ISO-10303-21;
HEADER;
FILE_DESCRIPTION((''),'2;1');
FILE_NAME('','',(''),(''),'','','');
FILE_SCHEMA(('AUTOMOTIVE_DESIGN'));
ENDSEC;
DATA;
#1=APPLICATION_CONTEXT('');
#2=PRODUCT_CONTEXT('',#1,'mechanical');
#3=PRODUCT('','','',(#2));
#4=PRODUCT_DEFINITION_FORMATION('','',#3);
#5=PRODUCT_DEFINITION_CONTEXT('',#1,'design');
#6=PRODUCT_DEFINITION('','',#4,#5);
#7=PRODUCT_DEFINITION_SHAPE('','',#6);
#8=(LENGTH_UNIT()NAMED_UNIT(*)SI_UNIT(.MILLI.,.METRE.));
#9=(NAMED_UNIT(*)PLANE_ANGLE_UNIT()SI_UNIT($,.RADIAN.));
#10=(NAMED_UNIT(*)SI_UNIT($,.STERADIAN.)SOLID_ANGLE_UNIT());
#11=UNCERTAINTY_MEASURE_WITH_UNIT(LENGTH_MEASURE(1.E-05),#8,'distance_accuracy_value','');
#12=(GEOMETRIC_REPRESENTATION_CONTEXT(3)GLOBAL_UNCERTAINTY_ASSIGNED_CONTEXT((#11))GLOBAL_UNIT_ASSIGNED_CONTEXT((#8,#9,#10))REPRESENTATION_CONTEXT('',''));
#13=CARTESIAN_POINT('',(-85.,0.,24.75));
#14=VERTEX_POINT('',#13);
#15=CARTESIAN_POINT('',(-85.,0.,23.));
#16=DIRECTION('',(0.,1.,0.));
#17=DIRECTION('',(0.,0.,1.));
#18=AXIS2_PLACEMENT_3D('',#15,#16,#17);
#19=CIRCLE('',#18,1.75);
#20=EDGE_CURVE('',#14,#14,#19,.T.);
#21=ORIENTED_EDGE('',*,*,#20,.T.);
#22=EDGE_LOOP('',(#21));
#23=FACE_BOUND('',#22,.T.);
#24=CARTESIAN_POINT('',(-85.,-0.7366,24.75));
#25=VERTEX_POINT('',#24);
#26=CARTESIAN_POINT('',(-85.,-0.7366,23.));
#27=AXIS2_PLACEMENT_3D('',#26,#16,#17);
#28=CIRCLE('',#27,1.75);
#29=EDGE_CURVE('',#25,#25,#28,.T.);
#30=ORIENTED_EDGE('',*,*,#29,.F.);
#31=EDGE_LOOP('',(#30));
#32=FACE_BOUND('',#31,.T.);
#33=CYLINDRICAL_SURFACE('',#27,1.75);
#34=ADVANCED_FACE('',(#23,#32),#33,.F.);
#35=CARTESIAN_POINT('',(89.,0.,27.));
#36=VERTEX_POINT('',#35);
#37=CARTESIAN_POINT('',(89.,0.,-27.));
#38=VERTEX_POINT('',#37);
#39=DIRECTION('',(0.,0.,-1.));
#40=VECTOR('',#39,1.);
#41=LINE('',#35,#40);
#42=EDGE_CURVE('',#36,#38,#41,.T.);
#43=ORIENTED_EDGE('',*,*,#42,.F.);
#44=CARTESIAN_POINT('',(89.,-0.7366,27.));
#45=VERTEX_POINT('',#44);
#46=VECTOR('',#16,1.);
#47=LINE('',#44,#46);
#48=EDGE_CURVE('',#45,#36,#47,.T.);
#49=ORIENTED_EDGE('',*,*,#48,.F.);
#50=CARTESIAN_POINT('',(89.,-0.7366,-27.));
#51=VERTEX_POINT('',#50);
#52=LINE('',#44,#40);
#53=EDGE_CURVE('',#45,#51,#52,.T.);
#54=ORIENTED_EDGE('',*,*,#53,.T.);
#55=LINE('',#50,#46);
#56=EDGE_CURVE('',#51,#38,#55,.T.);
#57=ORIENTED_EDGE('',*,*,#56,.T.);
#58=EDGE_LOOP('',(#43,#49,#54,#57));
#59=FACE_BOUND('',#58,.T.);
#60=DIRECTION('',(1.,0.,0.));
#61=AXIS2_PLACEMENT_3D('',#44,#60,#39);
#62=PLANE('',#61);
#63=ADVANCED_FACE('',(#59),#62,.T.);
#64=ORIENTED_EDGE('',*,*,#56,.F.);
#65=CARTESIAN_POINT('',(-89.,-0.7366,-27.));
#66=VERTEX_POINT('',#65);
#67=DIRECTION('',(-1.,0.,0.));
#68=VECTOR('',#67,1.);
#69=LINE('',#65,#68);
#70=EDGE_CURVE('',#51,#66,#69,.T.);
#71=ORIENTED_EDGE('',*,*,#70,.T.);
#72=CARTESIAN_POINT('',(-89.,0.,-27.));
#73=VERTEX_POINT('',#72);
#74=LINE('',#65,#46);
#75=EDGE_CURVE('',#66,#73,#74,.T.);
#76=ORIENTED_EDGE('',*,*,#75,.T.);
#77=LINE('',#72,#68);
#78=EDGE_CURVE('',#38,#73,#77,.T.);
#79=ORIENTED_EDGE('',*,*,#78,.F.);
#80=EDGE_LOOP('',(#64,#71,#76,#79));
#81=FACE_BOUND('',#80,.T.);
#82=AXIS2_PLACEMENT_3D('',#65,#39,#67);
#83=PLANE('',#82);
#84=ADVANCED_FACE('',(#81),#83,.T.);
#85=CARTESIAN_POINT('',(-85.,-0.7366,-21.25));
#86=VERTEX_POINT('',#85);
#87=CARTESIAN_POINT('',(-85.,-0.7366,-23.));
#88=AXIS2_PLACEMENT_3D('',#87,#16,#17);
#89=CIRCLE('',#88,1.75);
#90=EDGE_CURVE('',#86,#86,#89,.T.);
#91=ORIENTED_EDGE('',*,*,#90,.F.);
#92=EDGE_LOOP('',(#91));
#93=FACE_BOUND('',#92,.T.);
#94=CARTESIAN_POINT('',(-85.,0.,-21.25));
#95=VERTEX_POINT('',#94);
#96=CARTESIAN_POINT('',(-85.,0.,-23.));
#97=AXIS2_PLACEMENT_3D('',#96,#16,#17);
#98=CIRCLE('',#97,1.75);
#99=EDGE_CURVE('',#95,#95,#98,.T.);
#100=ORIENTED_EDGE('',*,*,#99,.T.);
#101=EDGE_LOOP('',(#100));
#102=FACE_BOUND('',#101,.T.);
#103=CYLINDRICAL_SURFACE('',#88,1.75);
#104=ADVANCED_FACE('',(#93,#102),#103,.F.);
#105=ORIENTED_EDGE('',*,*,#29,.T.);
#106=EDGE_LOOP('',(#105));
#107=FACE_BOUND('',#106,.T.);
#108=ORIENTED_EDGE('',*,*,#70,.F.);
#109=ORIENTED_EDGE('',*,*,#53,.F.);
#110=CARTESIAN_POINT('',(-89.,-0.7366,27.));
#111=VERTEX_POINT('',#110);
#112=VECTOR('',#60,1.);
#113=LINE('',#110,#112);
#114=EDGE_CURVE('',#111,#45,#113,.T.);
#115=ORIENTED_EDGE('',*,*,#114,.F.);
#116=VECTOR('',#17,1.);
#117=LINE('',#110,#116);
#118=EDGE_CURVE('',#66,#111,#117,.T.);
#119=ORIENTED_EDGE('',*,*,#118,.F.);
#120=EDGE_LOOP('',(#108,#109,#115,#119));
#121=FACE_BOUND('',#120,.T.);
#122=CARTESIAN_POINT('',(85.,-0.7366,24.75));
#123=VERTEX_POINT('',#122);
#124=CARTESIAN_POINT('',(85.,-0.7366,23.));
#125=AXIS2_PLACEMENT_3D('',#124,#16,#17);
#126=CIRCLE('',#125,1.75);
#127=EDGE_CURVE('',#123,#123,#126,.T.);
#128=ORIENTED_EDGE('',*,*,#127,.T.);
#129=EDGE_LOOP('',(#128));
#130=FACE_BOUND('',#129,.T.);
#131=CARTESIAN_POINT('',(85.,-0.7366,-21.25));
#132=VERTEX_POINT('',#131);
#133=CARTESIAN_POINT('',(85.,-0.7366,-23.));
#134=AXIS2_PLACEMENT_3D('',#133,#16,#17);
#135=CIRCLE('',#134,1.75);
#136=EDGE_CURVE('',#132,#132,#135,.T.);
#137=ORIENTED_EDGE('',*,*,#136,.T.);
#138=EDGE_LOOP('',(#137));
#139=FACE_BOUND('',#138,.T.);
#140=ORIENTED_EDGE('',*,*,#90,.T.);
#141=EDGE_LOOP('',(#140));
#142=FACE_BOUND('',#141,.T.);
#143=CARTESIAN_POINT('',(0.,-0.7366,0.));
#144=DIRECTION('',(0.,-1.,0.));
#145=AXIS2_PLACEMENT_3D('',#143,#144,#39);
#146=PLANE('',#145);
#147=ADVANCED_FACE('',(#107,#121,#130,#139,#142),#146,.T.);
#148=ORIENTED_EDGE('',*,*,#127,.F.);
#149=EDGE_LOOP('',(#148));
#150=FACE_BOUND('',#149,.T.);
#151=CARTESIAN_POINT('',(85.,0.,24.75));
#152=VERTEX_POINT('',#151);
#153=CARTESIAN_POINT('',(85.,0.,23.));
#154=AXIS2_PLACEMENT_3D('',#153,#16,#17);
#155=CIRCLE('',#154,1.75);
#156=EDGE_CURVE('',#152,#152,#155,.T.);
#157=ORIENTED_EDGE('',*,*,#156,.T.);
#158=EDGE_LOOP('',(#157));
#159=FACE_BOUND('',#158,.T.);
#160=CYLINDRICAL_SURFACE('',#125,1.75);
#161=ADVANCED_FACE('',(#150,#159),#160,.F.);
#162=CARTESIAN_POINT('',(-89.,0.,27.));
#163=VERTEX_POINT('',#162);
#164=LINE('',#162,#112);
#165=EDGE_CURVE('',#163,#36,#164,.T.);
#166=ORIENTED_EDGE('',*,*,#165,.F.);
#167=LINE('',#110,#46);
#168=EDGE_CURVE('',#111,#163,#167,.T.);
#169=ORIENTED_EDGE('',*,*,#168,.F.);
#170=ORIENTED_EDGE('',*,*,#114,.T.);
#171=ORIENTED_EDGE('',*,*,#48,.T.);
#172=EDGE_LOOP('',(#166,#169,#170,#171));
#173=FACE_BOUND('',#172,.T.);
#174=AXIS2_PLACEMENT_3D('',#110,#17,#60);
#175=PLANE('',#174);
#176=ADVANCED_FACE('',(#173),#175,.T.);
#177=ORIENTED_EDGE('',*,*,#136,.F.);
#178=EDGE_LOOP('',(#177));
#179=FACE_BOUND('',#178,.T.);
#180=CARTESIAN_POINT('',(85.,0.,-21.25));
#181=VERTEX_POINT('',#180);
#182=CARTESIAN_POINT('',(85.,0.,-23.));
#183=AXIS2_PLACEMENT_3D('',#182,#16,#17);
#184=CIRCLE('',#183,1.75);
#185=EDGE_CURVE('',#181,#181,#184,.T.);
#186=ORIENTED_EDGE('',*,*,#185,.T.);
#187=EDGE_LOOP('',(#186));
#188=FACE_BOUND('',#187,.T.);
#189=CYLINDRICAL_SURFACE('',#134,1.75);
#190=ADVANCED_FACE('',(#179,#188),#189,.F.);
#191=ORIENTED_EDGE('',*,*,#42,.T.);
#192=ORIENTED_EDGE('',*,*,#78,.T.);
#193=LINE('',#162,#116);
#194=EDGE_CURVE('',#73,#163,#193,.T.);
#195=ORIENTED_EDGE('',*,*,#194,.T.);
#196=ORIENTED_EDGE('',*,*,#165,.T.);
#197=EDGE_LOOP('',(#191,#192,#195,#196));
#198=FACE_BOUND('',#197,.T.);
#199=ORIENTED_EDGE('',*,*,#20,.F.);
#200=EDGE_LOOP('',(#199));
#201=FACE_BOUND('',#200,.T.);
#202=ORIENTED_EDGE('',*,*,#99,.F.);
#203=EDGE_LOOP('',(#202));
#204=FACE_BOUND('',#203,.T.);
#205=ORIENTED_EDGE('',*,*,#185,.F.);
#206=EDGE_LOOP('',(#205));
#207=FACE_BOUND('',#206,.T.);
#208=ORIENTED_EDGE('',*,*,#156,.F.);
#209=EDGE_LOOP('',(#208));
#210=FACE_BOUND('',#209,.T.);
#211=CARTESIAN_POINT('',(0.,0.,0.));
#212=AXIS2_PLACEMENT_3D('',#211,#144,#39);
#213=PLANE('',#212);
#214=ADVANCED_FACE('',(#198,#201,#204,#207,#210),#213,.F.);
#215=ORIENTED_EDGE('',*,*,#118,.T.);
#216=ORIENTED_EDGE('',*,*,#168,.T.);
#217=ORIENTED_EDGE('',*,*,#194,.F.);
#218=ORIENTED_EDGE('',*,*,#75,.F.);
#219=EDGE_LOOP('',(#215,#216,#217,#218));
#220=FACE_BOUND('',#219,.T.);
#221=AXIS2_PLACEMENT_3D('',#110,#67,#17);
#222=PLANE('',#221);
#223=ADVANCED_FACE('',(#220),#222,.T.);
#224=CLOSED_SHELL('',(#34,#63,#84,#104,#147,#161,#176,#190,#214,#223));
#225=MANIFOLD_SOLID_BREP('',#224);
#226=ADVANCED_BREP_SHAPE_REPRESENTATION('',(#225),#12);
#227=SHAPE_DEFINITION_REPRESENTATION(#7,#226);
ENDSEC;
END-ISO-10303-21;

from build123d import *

# Parameters (mm, degrees)
SKETCH1_W          = 178
SKETCH1_H          = 54
SKETCH1_R          = 1.75
BASE_FLANGE1_DEPTH = 0.7366


# Sheet-metal steps are written as plain solids
with BuildPart() as part:
    # Sketch1 → Base-Flange1 (new body)
    with BuildSketch(Plane(origin=(0, 0, 0), x_dir=(1, 0, 0), z_dir=(0, 1, 0))):
        Rectangle(SKETCH1_W, SKETCH1_H)
        with Locations(Location((85, 23, 0), (0, 0, 270))):
            Circle(SKETCH1_R, mode=Mode.SUBTRACT)
        with Locations(Location((85, -23, 0), (0, 0, 270))):
            Circle(SKETCH1_R, mode=Mode.SUBTRACT)
        with Locations(Location((-85, -23, 0), (0, 0, 270))):
            Circle(SKETCH1_R, mode=Mode.SUBTRACT)
        with Locations(Location((-85, 23, 0), (0, 0, 270))):
            Circle(SKETCH1_R, mode=Mode.SUBTRACT)
    extrude(amount=-BASE_FLANGE1_DEPTH)


solid = part.part
